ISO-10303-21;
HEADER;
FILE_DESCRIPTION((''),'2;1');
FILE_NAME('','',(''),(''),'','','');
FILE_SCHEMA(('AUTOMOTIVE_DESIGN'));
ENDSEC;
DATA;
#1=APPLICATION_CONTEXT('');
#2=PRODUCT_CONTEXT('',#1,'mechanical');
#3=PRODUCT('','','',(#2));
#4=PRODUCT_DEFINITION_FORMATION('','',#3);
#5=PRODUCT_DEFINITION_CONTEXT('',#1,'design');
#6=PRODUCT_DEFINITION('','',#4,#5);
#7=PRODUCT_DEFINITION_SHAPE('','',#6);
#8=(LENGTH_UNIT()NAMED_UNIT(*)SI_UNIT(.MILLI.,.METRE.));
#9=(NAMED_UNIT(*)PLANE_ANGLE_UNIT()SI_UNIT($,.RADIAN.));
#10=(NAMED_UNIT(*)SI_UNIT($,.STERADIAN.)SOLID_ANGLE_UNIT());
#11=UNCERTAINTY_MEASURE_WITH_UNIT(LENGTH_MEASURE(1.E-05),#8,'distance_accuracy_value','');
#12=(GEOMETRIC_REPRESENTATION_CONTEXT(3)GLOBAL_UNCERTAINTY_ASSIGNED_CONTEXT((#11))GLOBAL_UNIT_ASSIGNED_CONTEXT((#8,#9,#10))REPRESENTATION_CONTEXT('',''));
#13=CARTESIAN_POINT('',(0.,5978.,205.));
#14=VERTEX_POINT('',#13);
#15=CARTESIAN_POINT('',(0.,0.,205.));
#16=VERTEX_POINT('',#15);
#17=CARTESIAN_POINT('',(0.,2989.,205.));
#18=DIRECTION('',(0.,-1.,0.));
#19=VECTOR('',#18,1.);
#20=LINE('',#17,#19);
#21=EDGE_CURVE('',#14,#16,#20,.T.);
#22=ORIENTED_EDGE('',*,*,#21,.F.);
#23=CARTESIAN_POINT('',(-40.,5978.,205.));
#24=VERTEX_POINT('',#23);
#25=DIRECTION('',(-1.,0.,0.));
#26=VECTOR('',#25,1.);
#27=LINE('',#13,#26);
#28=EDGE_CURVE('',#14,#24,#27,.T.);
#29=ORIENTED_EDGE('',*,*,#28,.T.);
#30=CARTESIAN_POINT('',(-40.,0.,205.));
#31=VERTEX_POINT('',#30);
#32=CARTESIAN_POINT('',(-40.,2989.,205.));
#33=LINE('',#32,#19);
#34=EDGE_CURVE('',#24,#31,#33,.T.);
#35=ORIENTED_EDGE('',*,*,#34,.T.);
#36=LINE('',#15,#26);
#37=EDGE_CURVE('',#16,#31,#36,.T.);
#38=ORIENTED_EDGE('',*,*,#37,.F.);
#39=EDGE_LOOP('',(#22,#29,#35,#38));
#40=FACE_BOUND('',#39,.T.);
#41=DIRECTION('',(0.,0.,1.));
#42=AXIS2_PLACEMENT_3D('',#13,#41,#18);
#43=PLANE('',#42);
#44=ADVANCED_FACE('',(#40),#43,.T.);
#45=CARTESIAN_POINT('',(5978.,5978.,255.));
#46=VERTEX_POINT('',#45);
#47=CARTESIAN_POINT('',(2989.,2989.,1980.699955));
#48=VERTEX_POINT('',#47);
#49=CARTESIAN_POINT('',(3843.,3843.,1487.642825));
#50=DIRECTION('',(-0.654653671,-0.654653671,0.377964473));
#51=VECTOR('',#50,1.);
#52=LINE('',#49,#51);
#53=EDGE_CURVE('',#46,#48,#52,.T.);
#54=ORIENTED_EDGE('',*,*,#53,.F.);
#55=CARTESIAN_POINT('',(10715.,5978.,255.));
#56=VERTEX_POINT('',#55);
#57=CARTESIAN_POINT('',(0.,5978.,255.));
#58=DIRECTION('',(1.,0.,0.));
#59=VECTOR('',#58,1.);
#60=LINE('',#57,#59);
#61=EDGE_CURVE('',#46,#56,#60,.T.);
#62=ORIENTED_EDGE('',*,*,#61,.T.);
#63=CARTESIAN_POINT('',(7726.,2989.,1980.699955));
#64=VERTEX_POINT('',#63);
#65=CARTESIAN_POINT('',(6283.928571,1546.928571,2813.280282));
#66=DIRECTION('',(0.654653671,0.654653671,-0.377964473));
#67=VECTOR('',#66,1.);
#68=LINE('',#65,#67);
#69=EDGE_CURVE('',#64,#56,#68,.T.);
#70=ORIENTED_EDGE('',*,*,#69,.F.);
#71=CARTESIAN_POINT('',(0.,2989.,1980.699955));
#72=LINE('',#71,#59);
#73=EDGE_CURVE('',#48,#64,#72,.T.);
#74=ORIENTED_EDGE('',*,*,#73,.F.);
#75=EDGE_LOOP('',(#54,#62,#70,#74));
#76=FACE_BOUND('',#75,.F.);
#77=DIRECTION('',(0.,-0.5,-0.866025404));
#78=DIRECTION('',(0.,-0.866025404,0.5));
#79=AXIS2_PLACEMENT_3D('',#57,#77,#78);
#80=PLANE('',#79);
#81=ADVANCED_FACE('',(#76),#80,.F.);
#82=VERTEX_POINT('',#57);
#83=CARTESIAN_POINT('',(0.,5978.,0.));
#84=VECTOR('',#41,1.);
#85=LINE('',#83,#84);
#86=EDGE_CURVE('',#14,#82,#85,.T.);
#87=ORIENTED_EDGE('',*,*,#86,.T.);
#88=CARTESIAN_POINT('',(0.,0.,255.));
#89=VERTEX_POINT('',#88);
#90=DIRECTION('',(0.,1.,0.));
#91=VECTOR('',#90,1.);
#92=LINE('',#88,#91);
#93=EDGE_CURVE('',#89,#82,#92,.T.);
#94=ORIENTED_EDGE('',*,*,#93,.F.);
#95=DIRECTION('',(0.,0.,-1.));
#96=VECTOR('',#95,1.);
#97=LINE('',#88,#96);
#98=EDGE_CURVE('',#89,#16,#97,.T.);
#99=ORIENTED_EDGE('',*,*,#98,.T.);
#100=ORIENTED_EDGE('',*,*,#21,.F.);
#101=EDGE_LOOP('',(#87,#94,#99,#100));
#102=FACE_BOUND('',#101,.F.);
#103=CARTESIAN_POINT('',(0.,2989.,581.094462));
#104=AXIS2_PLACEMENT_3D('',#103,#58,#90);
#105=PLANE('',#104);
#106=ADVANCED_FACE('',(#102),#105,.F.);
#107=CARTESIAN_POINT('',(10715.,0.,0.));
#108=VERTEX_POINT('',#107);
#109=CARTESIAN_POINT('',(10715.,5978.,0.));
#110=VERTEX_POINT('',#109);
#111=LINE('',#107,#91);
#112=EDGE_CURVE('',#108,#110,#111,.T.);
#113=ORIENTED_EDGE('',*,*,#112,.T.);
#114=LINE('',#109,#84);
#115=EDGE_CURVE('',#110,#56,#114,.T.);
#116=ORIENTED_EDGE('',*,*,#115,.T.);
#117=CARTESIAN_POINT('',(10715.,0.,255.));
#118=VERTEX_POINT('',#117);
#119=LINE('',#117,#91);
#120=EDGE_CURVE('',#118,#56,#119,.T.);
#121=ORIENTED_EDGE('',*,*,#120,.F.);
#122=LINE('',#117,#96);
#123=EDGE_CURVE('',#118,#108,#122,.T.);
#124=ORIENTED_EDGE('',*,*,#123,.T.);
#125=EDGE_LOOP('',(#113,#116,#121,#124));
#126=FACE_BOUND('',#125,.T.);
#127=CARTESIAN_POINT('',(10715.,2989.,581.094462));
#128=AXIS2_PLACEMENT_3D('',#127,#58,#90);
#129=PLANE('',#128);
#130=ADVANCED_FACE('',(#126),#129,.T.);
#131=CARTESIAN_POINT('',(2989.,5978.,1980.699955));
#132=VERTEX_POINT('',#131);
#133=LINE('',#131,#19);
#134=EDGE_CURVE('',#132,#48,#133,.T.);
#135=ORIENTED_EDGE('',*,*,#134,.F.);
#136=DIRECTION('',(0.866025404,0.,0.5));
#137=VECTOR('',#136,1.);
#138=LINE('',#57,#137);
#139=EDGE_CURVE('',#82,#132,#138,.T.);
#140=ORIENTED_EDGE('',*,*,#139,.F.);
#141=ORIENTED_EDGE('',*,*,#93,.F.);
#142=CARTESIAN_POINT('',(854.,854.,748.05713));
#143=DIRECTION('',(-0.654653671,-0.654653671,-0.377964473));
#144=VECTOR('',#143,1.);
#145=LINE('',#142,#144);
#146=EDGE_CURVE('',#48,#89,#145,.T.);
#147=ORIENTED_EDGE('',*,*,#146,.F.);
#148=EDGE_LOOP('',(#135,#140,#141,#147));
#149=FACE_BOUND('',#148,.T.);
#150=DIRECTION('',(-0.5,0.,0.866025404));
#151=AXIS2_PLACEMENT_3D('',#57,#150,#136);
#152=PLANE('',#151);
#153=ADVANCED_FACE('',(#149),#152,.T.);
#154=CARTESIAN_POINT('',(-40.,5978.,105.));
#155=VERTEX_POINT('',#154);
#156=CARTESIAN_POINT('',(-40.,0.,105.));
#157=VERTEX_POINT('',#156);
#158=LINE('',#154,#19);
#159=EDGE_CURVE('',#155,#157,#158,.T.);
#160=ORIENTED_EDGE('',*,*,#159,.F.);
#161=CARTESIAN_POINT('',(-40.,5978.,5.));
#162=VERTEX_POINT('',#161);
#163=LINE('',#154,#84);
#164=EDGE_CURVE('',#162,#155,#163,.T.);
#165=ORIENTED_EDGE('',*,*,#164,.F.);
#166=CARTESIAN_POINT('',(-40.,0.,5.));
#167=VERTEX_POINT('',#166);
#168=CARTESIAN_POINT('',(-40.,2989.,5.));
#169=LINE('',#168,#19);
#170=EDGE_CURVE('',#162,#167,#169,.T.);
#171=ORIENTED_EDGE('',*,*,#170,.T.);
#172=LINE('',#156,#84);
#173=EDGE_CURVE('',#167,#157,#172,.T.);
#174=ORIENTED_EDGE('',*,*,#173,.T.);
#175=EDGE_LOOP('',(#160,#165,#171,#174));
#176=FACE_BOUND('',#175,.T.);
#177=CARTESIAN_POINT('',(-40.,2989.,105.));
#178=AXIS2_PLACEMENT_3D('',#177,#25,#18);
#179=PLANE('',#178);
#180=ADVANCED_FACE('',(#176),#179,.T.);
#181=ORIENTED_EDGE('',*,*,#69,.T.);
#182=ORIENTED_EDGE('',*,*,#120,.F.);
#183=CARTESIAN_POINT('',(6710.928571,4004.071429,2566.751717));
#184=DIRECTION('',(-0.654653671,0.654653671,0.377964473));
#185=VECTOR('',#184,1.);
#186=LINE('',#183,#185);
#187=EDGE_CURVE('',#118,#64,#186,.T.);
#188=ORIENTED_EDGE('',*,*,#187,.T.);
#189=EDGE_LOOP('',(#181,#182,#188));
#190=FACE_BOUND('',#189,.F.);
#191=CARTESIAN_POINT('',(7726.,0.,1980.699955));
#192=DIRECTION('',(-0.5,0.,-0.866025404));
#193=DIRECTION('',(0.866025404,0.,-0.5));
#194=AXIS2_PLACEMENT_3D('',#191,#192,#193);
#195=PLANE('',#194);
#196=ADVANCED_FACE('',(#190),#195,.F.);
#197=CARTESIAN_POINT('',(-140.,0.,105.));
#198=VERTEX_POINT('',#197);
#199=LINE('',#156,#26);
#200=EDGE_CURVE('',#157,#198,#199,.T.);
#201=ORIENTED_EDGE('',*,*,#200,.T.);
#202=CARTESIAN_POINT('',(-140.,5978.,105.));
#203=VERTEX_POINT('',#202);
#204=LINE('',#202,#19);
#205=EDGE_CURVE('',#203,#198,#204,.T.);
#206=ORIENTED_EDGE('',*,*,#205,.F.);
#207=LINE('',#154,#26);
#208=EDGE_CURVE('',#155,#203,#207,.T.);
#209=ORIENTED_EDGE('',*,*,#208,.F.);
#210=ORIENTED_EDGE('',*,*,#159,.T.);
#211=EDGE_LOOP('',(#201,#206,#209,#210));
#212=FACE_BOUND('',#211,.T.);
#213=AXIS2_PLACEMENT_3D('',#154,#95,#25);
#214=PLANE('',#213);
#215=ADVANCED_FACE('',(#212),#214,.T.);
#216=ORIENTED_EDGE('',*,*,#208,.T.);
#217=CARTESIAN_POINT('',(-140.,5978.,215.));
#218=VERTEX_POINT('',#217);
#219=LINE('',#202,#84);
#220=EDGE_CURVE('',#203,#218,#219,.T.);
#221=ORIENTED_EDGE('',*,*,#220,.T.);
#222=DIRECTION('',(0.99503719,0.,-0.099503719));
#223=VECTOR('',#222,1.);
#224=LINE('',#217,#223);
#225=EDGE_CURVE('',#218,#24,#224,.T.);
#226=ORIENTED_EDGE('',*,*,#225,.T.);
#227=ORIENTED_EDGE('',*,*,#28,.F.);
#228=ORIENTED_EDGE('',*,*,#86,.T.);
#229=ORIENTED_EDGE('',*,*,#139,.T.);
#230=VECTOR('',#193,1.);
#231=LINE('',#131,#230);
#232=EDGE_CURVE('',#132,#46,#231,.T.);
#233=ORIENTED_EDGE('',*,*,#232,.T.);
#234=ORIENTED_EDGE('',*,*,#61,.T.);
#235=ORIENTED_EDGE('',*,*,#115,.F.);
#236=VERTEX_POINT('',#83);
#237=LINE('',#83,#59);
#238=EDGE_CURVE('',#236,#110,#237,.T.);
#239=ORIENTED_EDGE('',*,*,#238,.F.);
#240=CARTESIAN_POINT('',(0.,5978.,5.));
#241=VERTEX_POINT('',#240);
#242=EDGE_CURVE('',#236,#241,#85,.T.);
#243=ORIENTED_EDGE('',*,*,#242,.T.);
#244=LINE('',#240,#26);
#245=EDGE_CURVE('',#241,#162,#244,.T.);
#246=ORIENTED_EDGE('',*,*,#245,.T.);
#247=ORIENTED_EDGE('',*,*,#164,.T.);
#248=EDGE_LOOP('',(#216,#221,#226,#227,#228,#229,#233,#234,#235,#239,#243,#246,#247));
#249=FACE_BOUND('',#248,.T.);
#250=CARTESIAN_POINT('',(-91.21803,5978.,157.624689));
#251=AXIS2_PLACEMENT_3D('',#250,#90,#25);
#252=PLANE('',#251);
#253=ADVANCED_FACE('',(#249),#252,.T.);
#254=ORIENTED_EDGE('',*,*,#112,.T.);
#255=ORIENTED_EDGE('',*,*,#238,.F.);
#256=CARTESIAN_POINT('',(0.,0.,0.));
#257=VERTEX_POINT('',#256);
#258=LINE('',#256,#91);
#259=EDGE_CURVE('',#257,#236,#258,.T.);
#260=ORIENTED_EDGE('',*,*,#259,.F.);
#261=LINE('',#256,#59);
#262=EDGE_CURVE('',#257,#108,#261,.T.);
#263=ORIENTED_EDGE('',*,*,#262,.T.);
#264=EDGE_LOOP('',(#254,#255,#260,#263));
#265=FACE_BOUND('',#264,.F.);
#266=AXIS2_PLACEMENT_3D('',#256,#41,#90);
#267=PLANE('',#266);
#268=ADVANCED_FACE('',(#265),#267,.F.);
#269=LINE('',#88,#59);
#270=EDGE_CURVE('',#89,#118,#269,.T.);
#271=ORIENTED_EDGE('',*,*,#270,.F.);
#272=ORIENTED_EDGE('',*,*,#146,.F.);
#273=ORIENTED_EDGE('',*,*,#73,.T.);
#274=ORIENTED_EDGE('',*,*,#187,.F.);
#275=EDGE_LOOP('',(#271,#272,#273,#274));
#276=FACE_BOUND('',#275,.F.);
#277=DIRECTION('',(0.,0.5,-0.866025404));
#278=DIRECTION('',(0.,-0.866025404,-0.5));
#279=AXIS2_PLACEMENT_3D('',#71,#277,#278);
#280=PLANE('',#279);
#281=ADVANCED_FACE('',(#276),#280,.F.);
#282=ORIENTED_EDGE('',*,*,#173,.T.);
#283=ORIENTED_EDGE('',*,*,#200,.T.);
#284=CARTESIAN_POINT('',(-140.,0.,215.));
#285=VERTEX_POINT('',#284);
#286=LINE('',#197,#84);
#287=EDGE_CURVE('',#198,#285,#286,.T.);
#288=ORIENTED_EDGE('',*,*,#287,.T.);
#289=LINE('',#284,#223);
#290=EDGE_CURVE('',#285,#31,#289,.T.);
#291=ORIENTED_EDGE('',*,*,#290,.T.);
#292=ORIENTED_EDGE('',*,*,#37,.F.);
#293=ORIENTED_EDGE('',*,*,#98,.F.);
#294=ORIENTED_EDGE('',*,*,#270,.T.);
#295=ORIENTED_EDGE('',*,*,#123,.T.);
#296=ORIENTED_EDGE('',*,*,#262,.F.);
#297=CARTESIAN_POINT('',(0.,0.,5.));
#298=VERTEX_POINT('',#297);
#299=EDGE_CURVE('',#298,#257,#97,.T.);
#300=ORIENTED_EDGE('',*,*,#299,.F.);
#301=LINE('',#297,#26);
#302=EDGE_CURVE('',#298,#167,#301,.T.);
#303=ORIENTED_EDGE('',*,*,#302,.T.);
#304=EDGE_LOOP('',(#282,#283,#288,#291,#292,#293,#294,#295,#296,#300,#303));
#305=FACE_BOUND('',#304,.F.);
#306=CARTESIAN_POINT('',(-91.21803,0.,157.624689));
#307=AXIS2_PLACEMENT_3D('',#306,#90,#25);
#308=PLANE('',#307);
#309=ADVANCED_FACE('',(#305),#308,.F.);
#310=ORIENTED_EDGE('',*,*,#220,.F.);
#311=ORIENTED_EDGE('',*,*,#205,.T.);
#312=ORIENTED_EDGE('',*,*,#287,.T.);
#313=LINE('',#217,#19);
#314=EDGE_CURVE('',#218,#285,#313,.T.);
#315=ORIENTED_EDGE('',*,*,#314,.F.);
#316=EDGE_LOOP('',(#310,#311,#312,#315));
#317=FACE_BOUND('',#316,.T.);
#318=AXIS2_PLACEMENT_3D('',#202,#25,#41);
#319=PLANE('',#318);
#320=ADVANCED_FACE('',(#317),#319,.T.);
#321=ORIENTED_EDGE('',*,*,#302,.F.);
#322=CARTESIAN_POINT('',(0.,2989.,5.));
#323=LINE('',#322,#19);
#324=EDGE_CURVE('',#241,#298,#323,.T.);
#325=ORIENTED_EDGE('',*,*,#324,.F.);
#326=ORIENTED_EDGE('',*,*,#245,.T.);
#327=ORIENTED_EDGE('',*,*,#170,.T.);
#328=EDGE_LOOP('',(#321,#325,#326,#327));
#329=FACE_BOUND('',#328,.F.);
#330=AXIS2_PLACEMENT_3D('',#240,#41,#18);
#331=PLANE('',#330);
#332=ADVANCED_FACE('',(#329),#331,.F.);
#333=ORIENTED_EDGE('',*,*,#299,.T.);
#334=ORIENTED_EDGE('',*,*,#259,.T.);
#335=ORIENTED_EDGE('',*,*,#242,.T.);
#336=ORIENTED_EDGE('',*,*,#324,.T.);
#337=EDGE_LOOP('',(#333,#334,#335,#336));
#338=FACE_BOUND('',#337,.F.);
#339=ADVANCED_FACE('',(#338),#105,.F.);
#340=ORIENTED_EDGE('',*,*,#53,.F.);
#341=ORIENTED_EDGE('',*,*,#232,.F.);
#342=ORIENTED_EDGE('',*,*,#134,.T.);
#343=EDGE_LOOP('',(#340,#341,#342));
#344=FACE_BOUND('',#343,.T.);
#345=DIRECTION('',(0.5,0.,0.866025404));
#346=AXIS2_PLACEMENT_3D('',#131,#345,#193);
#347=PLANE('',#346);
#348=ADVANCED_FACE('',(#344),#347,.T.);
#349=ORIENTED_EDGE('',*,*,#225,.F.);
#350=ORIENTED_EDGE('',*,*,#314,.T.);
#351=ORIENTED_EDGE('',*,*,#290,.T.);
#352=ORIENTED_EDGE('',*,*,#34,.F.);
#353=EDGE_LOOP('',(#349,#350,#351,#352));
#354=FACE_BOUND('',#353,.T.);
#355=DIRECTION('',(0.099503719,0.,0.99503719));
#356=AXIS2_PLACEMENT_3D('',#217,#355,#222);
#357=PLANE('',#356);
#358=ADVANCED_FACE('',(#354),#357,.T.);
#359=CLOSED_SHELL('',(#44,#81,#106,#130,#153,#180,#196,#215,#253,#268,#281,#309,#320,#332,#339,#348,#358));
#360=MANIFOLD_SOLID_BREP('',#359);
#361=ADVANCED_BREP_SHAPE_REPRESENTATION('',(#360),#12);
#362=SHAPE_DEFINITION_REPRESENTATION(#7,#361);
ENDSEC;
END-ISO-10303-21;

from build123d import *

# Parameters (mm, degrees)
F1_DEPTH = 10715
F3_DEPTH = 5978.001
F6_W     = 5978
F6_H     = 200
F7_DEPTH = 40
F9_DEPTH = 5978


with BuildPart() as f1:
    # F0 (on Right) → F1 (new body)
    with BuildSketch(Plane.YZ):
        Polygon((0, 255), (0, 0), (5978, 0), (5978, 255), (2989, 1980.6999546078), align=None)
    extrude(amount=F1_DEPTH)

    # F2 (on Front) → F3 (cut, through all)
    with BuildSketch(Plane.XZ):
        Polygon((0, 1980.6999546078), (0, 255), (2989, 1980.6999546078), align=None)
        Polygon((7726, 1980.6999546078), (10715, 255), (10715, 1980.6999546078), align=None)
    extrude(amount=-F3_DEPTH, mode=Mode.SUBTRACT)

    # F4 (on face) → F5 (join, up to the next surface of F1)
    with BuildSketch(Plane(origin=(0, 5978, 0), x_dir=(-1, 0, 0), z_dir=(0, 1, 0))):
        Polygon((-5978, 255), (0, 255), (-2989, 1980.6999546078), align=None)
    extrude(until=Until.NEXT, dir=(0, -1, 0))

    # F6 (on face) → F7 (join)
    with BuildSketch(Plane(origin=(0, 0, 0), x_dir=(0, -1, 0), z_dir=(-1, 0, 0))):
        with Locations((-2989, 105)):
            Rectangle(F6_W, F6_H)
    extrude(amount=F7_DEPTH)

    # F8 (on face) → F9 (join, through all)
    with BuildSketch(Plane(origin=(0, 5978, 0), x_dir=(-1, 0, 0), z_dir=(0, 1, 0))):
        Polygon((140, 215), (40, 205), (40, 105), (140, 105), align=None)
    extrude(amount=-F9_DEPTH)


solid = f1.part
